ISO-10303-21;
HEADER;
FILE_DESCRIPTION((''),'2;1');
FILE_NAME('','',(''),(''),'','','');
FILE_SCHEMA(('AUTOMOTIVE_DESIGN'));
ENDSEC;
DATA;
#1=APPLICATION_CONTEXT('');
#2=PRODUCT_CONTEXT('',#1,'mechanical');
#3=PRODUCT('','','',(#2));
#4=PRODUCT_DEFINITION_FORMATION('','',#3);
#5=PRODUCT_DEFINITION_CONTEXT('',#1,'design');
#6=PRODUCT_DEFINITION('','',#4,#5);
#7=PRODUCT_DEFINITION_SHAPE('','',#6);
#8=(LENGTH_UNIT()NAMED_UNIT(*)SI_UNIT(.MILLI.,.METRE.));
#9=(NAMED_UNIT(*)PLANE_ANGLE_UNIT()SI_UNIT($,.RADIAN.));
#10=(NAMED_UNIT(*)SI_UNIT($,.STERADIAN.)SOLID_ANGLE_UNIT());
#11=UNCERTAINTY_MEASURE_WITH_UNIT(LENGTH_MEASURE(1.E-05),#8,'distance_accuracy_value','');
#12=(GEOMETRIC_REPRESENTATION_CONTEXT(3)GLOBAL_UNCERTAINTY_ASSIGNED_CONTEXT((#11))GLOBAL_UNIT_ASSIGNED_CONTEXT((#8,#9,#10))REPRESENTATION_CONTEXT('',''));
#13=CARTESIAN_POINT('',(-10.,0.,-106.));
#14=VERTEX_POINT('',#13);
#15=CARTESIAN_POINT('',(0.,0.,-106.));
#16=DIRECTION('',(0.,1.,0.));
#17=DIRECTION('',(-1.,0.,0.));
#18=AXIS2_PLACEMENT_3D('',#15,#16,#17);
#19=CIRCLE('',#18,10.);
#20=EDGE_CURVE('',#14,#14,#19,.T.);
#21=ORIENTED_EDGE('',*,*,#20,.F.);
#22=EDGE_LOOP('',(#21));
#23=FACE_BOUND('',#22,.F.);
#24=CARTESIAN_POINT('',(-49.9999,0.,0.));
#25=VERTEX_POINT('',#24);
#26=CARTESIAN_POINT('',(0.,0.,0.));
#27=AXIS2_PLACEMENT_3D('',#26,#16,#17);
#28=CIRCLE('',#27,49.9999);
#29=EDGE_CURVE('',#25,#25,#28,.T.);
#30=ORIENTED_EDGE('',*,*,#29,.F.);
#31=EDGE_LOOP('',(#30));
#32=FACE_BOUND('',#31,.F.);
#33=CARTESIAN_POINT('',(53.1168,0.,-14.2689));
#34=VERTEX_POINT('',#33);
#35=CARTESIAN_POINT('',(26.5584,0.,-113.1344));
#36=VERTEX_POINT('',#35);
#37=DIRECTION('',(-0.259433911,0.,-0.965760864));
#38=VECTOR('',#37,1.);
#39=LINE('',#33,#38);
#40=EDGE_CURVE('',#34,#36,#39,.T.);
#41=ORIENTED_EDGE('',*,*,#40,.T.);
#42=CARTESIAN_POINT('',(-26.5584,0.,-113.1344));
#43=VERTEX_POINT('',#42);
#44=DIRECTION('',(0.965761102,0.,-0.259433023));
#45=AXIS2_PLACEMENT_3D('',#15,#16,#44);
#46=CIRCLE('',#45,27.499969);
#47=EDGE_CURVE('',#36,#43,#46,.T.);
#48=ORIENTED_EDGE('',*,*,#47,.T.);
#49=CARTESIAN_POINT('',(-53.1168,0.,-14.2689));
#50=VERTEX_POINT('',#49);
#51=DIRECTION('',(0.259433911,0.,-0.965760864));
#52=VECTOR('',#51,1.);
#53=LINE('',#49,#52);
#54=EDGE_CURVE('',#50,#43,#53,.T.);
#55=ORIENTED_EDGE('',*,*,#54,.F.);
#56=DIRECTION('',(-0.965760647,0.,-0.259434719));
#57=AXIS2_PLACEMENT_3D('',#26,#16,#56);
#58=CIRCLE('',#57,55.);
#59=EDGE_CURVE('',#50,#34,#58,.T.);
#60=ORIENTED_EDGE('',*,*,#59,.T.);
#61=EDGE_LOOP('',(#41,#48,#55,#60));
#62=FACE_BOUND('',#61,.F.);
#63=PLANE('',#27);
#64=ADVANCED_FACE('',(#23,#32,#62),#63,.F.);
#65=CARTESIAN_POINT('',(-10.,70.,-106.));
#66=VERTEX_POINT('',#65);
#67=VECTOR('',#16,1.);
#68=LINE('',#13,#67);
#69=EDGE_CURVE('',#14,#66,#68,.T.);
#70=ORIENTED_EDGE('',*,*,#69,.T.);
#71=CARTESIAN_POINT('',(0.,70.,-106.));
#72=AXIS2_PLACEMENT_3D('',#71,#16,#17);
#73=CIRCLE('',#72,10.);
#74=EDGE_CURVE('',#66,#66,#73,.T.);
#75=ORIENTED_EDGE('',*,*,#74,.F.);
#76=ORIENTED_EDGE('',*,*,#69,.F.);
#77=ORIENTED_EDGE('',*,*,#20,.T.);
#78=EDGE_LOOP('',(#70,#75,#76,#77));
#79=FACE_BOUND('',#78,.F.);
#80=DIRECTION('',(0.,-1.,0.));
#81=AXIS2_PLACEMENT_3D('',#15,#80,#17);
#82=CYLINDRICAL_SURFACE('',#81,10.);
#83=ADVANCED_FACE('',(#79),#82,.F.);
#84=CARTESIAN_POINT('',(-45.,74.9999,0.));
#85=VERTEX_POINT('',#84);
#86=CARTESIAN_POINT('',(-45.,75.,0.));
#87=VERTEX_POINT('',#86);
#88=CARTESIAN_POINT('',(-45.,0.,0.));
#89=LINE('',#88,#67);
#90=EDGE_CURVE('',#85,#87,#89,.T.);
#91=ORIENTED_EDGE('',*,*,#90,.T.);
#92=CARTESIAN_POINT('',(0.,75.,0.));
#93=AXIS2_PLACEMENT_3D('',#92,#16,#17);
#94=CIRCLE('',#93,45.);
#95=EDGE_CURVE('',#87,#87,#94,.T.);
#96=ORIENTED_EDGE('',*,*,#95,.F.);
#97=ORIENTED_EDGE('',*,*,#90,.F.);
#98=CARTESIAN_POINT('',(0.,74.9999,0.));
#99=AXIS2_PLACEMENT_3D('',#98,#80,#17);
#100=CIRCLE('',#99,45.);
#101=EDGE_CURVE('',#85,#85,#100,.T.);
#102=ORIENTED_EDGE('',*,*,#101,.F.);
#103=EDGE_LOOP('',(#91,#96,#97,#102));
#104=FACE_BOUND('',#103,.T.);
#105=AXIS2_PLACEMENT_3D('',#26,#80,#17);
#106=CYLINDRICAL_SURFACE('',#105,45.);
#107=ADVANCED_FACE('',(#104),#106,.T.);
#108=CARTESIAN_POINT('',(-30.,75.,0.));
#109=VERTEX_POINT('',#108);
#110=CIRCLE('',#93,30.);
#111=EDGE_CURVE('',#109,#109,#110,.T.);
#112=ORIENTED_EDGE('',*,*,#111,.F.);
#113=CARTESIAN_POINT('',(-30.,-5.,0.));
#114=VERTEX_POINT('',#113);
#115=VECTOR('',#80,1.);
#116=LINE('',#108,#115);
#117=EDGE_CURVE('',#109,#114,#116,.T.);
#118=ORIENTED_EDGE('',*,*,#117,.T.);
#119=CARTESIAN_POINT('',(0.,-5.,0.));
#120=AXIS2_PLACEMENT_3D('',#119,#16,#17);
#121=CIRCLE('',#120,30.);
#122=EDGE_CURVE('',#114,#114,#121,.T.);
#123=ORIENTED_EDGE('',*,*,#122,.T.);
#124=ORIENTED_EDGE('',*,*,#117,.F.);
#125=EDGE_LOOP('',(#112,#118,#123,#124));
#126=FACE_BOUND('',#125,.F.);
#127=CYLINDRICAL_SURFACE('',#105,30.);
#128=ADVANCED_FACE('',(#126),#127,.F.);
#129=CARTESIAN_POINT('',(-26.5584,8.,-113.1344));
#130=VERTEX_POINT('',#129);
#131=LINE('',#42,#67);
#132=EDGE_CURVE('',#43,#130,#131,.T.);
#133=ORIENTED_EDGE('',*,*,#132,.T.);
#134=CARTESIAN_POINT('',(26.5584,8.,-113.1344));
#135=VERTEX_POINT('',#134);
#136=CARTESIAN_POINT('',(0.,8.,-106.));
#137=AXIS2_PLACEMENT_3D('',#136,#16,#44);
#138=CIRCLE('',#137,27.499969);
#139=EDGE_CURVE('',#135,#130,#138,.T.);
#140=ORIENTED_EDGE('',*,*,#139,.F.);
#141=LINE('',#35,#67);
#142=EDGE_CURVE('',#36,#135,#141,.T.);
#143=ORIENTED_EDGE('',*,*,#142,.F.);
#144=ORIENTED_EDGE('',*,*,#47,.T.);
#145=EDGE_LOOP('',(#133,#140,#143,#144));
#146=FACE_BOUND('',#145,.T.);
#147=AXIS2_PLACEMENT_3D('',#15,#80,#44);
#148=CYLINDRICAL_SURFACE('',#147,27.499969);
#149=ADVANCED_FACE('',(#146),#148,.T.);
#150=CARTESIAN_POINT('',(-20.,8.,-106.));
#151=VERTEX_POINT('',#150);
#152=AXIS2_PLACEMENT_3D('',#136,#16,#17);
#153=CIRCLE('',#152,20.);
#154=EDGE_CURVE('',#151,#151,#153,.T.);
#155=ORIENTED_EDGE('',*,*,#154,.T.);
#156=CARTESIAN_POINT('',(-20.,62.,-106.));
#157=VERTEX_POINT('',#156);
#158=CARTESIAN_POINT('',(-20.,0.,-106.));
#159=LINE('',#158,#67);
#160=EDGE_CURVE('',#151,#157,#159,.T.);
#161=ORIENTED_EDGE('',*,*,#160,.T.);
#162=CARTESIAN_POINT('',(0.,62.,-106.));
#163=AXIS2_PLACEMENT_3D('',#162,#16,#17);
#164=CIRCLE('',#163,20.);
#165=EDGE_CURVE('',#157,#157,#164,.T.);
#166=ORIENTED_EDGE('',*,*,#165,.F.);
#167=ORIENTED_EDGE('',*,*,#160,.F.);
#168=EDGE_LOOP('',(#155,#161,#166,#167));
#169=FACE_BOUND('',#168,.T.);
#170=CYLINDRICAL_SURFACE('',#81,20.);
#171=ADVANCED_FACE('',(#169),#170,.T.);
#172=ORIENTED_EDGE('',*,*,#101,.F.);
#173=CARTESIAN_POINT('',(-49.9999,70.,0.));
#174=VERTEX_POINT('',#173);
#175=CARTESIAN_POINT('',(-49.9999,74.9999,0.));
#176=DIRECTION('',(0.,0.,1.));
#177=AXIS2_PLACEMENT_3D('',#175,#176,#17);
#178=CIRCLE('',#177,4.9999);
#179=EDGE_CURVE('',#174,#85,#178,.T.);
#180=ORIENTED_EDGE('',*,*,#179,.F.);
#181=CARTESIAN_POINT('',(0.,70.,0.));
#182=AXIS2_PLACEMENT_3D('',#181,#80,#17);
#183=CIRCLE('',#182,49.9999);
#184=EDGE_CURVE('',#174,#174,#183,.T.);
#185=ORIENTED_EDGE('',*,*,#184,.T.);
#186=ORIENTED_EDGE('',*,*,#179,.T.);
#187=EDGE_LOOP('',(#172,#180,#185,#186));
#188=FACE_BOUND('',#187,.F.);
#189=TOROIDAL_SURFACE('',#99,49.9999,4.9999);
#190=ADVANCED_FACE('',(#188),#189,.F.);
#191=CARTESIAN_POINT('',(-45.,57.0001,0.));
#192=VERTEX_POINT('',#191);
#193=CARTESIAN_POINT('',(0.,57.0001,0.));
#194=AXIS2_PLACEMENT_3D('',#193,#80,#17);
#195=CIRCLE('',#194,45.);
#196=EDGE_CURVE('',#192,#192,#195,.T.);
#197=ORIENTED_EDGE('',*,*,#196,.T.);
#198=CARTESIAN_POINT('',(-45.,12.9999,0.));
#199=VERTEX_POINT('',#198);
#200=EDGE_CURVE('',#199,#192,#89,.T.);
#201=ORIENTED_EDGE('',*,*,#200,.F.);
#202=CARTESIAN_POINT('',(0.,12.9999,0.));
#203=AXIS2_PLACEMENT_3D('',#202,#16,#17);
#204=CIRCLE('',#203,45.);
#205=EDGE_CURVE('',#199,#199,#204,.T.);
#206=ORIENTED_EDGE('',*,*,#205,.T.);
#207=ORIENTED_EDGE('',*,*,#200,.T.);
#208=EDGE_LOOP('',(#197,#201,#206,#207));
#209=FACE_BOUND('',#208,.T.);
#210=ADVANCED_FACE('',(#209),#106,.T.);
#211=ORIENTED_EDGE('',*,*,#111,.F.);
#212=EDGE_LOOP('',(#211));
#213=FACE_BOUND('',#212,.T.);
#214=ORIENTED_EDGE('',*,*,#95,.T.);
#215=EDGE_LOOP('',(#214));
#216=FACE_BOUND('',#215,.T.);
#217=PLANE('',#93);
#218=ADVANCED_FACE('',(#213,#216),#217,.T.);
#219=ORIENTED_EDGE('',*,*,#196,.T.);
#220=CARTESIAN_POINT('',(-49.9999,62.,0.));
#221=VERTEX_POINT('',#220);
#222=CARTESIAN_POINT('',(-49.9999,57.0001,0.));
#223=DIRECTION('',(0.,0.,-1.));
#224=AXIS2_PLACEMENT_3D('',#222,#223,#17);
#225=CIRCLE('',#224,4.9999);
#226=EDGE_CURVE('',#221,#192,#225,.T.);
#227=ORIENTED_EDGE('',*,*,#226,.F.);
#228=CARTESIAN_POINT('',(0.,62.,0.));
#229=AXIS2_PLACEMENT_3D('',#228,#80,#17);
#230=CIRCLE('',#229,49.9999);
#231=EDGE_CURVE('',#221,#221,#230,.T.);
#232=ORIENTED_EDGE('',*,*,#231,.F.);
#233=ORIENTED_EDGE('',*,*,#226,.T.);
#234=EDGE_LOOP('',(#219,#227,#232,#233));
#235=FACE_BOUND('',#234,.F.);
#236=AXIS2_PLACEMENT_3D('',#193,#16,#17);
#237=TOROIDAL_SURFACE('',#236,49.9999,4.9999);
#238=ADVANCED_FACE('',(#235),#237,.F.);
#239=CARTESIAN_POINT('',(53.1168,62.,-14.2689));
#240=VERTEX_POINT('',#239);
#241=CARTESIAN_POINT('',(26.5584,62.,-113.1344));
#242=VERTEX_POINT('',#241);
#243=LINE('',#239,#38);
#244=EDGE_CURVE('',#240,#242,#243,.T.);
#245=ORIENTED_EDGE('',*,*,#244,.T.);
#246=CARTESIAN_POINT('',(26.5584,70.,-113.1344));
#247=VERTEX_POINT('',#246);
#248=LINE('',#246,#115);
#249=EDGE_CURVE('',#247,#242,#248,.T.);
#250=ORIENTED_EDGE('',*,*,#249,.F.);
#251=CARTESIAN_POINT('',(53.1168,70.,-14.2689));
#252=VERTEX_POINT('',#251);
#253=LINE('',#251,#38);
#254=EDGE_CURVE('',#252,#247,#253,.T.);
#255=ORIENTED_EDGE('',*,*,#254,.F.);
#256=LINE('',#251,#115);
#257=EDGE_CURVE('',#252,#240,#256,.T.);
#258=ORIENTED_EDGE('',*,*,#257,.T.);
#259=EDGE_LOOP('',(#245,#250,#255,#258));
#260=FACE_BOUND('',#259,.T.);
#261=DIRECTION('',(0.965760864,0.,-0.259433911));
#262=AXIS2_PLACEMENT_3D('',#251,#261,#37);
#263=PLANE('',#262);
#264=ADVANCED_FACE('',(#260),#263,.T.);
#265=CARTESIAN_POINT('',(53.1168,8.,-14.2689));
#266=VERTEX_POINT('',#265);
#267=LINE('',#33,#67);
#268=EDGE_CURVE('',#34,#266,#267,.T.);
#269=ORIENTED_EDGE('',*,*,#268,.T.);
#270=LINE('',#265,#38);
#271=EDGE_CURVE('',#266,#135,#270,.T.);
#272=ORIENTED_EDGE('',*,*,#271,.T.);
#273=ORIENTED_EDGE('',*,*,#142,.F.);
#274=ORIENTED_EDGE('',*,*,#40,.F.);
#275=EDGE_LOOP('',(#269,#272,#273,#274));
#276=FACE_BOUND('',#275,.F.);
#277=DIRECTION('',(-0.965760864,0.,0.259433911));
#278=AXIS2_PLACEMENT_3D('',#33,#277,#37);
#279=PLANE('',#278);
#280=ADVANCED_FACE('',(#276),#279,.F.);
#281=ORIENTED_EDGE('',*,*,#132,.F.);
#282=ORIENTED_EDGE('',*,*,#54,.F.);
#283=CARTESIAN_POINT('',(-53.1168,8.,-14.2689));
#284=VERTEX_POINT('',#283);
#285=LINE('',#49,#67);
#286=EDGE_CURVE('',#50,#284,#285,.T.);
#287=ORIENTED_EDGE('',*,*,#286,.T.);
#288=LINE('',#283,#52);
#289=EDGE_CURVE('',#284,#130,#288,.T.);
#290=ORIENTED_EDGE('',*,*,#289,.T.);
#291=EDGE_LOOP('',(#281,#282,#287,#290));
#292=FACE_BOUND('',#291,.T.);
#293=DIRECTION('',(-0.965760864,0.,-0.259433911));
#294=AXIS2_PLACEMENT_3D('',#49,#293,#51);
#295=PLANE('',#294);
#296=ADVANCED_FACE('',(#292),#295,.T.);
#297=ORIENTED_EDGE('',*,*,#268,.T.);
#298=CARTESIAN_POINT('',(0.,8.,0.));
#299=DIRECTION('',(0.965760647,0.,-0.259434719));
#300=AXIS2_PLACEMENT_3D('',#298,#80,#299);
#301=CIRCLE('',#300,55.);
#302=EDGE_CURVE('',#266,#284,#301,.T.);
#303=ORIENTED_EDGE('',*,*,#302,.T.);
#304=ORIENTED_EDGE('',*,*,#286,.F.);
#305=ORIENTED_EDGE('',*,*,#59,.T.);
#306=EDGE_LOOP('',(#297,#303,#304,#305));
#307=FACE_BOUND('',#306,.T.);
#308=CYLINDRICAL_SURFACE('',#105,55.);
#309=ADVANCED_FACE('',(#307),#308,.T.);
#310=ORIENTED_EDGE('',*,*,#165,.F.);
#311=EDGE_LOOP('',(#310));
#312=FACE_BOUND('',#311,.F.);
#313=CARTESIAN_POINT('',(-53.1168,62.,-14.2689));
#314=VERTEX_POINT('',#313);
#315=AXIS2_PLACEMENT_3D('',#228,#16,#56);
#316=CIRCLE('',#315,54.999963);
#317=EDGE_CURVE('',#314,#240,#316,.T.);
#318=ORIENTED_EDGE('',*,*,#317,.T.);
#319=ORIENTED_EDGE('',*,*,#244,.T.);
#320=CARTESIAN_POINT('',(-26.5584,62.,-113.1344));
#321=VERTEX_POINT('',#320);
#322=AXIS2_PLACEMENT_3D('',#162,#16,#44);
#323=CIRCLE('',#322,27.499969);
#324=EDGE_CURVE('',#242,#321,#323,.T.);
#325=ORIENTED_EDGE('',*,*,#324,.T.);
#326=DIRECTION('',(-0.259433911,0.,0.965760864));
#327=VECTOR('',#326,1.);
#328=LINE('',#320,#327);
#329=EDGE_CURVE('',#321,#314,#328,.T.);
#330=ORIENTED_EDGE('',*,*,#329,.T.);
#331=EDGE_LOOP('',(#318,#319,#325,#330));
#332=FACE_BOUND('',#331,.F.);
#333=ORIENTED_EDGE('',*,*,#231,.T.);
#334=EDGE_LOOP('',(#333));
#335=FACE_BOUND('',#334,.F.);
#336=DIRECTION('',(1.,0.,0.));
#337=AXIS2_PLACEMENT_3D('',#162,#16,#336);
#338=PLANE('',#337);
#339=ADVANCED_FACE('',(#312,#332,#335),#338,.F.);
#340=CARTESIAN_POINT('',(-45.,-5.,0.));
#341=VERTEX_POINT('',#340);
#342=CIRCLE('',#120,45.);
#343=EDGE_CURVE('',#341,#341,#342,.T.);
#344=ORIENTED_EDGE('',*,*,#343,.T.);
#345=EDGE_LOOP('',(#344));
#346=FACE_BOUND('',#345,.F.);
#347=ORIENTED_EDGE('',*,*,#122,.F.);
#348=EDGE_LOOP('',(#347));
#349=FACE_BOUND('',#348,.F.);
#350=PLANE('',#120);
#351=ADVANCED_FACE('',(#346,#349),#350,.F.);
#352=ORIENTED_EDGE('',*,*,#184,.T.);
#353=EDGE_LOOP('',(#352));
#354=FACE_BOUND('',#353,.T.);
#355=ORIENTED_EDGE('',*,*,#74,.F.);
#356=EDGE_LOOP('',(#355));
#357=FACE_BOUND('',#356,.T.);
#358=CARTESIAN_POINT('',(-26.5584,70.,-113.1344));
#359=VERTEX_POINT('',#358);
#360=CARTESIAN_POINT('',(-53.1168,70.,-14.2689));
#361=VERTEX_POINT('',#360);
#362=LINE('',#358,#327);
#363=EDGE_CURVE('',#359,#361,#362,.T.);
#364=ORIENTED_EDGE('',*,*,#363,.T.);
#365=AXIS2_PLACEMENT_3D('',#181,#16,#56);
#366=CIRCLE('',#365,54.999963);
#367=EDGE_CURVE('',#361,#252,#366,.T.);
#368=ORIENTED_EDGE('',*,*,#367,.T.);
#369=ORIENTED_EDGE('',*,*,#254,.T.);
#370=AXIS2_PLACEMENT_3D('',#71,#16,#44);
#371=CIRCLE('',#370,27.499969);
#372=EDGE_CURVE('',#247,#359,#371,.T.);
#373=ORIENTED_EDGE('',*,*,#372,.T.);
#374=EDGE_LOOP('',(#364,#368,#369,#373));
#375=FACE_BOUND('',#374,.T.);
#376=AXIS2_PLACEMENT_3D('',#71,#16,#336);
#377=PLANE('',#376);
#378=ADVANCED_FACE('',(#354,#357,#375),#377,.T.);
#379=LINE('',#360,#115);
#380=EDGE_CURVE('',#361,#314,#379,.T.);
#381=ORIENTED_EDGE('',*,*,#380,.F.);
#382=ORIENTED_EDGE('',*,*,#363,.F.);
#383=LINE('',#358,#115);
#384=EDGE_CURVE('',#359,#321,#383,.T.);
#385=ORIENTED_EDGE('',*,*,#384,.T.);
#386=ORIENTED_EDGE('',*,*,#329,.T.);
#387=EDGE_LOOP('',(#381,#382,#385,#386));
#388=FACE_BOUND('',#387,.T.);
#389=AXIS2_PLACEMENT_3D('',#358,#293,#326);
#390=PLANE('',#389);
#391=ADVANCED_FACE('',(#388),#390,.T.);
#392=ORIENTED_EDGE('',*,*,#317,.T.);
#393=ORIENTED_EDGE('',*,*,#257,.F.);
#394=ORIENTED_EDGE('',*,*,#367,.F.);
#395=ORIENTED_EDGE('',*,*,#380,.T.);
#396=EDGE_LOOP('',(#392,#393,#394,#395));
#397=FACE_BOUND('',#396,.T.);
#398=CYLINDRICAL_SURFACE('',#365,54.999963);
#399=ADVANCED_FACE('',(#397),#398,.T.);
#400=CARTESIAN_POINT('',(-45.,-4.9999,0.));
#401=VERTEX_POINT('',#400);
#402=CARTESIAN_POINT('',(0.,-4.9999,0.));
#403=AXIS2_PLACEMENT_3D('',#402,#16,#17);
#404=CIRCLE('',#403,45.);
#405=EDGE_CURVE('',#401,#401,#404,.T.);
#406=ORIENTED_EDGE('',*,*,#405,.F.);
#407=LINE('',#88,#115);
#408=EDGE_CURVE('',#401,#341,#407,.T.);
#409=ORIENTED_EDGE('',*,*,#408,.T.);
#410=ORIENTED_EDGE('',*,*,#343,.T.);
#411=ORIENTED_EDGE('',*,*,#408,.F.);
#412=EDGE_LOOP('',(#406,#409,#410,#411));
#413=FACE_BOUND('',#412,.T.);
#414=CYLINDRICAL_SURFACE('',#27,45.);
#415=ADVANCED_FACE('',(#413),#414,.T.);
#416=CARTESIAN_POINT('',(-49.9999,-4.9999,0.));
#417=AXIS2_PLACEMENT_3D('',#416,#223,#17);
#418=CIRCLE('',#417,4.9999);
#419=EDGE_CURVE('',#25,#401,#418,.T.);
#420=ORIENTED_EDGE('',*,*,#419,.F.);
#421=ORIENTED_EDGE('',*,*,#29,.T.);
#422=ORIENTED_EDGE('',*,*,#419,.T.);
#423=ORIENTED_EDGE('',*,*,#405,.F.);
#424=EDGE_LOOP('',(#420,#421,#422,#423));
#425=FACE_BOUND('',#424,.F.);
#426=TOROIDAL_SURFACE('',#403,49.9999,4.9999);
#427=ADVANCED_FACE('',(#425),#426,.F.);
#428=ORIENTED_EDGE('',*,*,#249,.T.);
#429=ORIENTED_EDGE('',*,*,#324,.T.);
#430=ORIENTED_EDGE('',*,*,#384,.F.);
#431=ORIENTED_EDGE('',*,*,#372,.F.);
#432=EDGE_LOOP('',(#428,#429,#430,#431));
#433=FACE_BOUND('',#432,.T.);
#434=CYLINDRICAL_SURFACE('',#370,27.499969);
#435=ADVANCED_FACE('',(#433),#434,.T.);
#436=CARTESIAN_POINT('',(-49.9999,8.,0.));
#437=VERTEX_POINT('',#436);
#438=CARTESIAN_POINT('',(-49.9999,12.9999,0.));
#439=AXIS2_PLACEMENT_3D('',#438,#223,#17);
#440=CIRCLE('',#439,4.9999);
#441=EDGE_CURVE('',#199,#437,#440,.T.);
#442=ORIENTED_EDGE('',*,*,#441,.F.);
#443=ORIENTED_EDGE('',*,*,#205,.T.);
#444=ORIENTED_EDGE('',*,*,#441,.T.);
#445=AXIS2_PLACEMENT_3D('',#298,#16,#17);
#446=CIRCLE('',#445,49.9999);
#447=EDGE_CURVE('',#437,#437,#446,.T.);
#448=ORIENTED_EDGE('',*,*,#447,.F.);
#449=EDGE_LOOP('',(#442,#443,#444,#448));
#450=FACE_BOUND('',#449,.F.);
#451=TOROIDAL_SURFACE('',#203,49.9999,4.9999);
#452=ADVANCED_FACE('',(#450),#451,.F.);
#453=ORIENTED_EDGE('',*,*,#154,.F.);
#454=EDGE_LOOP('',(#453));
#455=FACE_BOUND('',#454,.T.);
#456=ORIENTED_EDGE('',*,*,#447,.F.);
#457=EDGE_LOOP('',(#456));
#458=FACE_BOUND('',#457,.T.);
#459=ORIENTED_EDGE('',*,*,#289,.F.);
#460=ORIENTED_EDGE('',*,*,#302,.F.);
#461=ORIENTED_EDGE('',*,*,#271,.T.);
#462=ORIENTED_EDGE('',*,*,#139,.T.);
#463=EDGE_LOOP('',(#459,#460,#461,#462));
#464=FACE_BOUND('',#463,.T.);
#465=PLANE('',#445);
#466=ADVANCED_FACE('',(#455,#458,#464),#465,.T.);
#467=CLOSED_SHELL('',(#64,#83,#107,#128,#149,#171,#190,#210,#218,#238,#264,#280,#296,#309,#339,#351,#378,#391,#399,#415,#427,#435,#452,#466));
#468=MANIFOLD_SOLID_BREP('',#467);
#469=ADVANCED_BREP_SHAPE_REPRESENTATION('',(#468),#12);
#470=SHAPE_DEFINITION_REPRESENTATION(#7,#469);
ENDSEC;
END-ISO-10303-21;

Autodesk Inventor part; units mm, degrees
ref_plane "YZ Plane" through (0, 0, 0) normal (1, 0, 0) x (0, 1, 0)
ref_plane "XZ Plane" through (0, 0, 0) normal (0, 1, 0) x (-1, 0, 0)
ref_plane "XY Plane" through (0, 0, 0) normal (0, 0, 1) x (1, 0, 0)
sketch "草图1" plane through (0, 0, 0) normal (0, 1, 0) x (-1, 0, 0)
  circle A0 centre (0, 0) radius 30
  circle A1 centre (0, 0) radius 45
  circle A2 centre (0, -106) radius 10
  circle A3 centre (0, 0) radius 55
  arc A4 (-26.5584, -113.1344) -> (26.5584, -113.1344) centre (0, -106) ccw
  line L0 (53.1168, -14.2689) -> (26.5584, -113.1344)
  line L1 (-53.1168, -14.2689) -> (-26.5584, -113.1344)
  circle A5 centre (0, -106) radius 20
  dimension "d0" = 60
  dimension "d1" = 90
  dimension "d3" = 20
  dimension "d4" = 110
  dimension "d5" = 55
  dimension "d8" = 40
extrude "拉伸2" add sketch "草图1" along normal blind 70 contours A5
extrude "拉伸3" add sketch "草图1" along normal blind 75 and the other way blind 5 contours A1
extrude "拉伸4" add sketch "草图1" along normal blind 8 contours A3 | A3 L0 A4 L1
sketch "草图2" plane through (0, 70, -106) normal (0, 1, 0) x (1, 0, 0)
  circle A0 centre (0, 0) radius 20 projected
  circle A1 centre (0, 0) radius 10 projected
  arc A2 (26.5584, 7.1344) -> (-26.5584, 7.1344) centre (0, 0) ccw
  arc A3 (-53.1168, -91.7311) -> (53.1168, -91.7311) centre (0, -106) ccw
  line L0 (53.1168, -91.7311) -> (26.5584, 7.1344) projected
  line L1 (26.5584, 7.1344) -> (53.1168, -91.7311)
  line L2 (-26.5584, 7.1344) -> (-53.1168, -91.7311) projected
  line L3 (-26.5584, 7.1344) -> (-53.1168, -91.7311)
  circle A4 centre (0, -106) radius 30
  circle A5 centre (0, 0) radius 10
  dimension "d19" = 60
extrude "拉伸5" add sketch "草图2" against normal blind 8 contours L0 A3 L2 A2
fillet "圆角1" radius 5 4 edges at (45, 70, 0) (45, 0, 0) (45, 62, 0) (45, 8, 0)
